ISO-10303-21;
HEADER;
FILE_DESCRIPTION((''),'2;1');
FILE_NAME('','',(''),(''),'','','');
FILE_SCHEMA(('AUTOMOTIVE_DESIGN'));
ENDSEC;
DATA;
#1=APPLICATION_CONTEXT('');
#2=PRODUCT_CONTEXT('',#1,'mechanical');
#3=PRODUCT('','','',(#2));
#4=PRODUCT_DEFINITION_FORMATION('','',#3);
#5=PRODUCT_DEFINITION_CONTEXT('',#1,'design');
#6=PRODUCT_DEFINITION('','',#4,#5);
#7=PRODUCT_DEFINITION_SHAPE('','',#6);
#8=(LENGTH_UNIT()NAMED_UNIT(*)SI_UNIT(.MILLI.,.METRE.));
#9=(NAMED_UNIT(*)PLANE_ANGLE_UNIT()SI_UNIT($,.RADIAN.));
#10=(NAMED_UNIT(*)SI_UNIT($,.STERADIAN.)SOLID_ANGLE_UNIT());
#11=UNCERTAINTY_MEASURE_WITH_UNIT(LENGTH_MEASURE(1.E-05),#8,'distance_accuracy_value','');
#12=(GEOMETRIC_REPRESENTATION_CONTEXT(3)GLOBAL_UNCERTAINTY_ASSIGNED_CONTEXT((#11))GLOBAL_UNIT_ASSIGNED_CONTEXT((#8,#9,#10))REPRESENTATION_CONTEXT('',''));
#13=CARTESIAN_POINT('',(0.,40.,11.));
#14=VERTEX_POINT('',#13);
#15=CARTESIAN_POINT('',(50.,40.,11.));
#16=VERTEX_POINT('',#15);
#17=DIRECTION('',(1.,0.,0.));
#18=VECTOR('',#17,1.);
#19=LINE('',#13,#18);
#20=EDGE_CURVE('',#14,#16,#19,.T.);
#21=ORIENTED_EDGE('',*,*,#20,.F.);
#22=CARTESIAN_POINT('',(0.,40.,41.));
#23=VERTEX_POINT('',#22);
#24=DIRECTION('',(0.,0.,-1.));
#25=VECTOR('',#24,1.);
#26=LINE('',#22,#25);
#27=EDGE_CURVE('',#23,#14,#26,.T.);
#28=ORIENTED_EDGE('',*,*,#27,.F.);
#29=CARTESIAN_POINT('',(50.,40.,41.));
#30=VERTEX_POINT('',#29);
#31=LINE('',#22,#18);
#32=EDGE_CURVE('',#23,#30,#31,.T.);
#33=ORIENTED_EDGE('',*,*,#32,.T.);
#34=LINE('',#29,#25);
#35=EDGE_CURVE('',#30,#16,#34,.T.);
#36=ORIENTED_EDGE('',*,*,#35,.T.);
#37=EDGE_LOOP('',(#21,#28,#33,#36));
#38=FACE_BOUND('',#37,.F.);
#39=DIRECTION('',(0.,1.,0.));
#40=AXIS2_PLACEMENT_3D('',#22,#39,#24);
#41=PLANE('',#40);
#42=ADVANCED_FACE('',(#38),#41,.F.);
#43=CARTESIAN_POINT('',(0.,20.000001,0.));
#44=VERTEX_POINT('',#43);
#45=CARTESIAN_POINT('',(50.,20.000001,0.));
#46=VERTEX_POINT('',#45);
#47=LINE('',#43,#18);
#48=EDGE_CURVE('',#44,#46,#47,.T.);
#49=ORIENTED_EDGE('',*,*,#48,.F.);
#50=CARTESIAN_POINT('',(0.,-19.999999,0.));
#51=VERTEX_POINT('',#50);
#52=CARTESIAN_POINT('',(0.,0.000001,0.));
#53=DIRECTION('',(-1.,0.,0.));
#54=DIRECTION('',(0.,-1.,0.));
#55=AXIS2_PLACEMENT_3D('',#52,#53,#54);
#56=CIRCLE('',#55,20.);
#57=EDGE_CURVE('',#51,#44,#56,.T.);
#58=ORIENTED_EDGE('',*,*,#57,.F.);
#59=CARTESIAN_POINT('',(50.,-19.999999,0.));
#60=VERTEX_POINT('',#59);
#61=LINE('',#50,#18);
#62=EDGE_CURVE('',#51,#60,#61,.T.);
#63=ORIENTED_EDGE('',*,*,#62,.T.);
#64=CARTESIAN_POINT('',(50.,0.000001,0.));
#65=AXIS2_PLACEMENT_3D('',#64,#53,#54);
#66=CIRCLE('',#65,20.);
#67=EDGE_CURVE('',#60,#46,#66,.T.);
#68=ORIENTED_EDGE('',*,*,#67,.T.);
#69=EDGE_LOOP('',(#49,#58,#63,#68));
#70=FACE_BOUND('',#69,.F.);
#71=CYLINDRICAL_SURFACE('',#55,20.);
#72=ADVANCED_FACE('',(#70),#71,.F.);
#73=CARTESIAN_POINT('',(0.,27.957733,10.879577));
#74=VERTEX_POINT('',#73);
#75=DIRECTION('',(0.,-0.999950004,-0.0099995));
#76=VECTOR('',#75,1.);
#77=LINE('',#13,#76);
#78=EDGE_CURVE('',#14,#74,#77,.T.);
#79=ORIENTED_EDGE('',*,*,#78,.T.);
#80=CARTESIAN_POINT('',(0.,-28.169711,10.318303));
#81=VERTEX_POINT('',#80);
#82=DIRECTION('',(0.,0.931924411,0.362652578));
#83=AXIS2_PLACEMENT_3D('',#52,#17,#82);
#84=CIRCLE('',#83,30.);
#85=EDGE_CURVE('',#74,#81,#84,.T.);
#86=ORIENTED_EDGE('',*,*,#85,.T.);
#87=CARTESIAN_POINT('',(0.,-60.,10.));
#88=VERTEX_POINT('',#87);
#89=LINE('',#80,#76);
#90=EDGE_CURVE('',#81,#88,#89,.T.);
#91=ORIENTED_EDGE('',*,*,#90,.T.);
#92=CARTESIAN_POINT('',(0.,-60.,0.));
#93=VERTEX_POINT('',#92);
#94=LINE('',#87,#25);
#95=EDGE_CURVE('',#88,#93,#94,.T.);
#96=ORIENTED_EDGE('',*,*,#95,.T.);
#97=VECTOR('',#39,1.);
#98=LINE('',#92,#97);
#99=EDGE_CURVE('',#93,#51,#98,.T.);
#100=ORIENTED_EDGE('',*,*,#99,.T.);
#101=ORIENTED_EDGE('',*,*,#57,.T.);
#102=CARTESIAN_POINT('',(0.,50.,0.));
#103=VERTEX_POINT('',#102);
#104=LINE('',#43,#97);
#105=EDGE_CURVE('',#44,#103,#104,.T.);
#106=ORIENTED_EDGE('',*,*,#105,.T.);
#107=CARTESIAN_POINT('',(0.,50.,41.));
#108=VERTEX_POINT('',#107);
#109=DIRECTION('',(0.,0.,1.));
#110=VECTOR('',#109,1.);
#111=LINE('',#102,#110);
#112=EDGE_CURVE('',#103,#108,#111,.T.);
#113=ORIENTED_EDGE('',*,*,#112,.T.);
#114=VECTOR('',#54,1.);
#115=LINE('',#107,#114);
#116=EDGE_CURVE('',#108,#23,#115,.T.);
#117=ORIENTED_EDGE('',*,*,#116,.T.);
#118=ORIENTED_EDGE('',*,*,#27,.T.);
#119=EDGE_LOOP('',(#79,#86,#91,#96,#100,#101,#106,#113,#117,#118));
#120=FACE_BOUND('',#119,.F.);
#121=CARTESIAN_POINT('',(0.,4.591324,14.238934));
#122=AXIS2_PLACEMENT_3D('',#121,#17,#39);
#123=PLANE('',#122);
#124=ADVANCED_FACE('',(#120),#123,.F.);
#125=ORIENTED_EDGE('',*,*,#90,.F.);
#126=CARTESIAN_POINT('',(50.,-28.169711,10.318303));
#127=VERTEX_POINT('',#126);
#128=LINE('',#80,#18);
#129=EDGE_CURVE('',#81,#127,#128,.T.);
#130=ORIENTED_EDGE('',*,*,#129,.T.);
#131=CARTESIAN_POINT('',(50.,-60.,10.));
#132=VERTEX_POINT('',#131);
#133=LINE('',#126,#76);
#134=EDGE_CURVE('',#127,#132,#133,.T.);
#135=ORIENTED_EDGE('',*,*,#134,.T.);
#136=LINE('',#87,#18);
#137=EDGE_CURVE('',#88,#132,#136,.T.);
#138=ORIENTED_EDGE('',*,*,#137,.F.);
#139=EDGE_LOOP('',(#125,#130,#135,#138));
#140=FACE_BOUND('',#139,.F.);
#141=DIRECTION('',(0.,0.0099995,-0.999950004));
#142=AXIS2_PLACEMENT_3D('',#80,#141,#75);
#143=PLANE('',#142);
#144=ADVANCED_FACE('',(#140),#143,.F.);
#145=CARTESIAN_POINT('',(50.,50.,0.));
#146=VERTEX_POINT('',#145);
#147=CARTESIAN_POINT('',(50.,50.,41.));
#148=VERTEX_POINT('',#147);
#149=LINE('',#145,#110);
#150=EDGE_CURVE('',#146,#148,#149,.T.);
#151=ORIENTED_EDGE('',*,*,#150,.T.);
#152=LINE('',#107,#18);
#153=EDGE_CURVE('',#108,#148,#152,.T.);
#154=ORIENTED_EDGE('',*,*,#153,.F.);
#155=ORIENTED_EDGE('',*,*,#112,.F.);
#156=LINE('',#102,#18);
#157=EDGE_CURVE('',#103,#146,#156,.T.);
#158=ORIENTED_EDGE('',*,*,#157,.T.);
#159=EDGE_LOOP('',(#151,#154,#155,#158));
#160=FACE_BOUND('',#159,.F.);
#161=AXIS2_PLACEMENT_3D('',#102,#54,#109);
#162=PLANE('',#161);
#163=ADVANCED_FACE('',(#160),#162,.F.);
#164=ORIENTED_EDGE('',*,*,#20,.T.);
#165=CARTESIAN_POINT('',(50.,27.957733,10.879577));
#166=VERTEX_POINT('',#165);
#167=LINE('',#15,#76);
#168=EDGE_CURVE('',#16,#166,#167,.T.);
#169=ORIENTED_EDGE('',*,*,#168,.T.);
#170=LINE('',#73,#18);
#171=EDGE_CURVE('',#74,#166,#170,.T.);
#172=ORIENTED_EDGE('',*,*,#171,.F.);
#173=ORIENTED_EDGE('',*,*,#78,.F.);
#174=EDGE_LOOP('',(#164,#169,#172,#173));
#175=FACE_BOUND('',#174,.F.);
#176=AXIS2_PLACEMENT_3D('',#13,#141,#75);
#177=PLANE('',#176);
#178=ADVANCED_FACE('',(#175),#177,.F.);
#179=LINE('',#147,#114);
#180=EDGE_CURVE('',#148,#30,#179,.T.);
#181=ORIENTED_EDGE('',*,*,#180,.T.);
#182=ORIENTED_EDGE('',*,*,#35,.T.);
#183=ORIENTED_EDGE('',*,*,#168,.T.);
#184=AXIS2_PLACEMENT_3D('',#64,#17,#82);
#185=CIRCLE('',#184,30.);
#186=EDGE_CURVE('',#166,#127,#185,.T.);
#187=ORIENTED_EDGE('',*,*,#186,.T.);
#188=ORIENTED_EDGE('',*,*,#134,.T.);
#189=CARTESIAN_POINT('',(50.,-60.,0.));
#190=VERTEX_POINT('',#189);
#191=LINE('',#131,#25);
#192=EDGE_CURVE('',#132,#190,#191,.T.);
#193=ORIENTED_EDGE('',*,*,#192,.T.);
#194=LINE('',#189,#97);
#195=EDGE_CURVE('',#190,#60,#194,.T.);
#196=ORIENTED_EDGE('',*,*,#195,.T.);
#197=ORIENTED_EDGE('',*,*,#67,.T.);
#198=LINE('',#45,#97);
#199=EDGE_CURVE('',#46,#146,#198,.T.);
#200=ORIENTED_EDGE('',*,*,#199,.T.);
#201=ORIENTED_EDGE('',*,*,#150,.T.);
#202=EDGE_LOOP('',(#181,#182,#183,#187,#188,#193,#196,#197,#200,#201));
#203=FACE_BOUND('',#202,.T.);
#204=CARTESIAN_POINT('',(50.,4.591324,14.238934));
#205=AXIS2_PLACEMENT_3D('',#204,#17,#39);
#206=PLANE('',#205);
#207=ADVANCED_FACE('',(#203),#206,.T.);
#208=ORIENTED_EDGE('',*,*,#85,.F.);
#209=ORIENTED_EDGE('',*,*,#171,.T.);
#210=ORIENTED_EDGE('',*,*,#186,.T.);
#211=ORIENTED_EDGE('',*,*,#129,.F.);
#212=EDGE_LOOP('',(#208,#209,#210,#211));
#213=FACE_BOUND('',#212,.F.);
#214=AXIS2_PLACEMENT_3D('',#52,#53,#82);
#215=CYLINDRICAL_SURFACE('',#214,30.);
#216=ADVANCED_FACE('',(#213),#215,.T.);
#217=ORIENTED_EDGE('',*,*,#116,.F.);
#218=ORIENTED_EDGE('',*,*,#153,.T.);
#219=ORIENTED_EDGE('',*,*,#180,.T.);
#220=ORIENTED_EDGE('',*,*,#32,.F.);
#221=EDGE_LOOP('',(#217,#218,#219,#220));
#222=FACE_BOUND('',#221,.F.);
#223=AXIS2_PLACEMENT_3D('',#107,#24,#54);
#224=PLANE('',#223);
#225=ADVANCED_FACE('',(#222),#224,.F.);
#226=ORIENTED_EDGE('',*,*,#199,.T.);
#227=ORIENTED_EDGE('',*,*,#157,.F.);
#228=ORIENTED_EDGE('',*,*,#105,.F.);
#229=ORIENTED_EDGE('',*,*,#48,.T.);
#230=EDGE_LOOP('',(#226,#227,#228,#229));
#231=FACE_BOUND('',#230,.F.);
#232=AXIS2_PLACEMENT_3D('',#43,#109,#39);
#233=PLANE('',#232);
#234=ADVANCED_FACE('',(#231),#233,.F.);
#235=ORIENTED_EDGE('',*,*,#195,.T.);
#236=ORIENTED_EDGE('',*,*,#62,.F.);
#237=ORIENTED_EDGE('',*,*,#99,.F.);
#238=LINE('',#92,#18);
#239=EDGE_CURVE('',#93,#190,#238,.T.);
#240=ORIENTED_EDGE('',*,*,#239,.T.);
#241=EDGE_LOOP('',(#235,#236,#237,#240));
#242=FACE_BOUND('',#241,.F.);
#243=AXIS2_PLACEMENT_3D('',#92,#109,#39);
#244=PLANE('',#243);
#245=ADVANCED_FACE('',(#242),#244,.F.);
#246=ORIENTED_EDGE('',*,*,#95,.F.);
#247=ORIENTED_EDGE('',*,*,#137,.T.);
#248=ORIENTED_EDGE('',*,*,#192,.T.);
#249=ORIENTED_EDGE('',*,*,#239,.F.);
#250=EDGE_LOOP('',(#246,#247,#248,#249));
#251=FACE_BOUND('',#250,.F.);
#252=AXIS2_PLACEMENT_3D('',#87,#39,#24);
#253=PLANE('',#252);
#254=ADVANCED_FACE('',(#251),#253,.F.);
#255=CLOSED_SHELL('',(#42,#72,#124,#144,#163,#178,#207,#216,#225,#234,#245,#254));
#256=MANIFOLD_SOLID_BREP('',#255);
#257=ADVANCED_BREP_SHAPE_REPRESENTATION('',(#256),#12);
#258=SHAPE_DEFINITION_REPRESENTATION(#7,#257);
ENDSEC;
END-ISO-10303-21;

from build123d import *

# Parameters (mm, degrees)
F1_DEPTH = 50


# Not quite as in the source:
# - a feature names something its author has since deleted; it is built from what else it names


with BuildPart() as f1:
    # F0 (on Right) → F1 (new body)
    with BuildSketch(Plane.YZ):
        with BuildLine():
            Line((20.0000005408, 0), (50, 0))
            Line((50, 0), (50, 41))
            Line((50, 41), (40, 41))
            Line((40, 41), (40, 11))
            Line((40, 11), (27.9577328728, 10.8795773287))
            ThreePointArc((27.9577328728, 10.8795773287), (-0.2999844603, 29.9985001125), (-28.1697105934, 10.3183028941))
            Line((-28.1697105934, 10.3183028941), (-60, 10))
            Line((-60, 10), (-60, 0))
            Line((-60, 0), (-19.9999994592, 0))
            ThreePointArc((-19.9999994592, 0), (5.408e-07, 20), (20.0000005408, 0))
        make_face()
    extrude(amount=F1_DEPTH)


solid = f1.part
